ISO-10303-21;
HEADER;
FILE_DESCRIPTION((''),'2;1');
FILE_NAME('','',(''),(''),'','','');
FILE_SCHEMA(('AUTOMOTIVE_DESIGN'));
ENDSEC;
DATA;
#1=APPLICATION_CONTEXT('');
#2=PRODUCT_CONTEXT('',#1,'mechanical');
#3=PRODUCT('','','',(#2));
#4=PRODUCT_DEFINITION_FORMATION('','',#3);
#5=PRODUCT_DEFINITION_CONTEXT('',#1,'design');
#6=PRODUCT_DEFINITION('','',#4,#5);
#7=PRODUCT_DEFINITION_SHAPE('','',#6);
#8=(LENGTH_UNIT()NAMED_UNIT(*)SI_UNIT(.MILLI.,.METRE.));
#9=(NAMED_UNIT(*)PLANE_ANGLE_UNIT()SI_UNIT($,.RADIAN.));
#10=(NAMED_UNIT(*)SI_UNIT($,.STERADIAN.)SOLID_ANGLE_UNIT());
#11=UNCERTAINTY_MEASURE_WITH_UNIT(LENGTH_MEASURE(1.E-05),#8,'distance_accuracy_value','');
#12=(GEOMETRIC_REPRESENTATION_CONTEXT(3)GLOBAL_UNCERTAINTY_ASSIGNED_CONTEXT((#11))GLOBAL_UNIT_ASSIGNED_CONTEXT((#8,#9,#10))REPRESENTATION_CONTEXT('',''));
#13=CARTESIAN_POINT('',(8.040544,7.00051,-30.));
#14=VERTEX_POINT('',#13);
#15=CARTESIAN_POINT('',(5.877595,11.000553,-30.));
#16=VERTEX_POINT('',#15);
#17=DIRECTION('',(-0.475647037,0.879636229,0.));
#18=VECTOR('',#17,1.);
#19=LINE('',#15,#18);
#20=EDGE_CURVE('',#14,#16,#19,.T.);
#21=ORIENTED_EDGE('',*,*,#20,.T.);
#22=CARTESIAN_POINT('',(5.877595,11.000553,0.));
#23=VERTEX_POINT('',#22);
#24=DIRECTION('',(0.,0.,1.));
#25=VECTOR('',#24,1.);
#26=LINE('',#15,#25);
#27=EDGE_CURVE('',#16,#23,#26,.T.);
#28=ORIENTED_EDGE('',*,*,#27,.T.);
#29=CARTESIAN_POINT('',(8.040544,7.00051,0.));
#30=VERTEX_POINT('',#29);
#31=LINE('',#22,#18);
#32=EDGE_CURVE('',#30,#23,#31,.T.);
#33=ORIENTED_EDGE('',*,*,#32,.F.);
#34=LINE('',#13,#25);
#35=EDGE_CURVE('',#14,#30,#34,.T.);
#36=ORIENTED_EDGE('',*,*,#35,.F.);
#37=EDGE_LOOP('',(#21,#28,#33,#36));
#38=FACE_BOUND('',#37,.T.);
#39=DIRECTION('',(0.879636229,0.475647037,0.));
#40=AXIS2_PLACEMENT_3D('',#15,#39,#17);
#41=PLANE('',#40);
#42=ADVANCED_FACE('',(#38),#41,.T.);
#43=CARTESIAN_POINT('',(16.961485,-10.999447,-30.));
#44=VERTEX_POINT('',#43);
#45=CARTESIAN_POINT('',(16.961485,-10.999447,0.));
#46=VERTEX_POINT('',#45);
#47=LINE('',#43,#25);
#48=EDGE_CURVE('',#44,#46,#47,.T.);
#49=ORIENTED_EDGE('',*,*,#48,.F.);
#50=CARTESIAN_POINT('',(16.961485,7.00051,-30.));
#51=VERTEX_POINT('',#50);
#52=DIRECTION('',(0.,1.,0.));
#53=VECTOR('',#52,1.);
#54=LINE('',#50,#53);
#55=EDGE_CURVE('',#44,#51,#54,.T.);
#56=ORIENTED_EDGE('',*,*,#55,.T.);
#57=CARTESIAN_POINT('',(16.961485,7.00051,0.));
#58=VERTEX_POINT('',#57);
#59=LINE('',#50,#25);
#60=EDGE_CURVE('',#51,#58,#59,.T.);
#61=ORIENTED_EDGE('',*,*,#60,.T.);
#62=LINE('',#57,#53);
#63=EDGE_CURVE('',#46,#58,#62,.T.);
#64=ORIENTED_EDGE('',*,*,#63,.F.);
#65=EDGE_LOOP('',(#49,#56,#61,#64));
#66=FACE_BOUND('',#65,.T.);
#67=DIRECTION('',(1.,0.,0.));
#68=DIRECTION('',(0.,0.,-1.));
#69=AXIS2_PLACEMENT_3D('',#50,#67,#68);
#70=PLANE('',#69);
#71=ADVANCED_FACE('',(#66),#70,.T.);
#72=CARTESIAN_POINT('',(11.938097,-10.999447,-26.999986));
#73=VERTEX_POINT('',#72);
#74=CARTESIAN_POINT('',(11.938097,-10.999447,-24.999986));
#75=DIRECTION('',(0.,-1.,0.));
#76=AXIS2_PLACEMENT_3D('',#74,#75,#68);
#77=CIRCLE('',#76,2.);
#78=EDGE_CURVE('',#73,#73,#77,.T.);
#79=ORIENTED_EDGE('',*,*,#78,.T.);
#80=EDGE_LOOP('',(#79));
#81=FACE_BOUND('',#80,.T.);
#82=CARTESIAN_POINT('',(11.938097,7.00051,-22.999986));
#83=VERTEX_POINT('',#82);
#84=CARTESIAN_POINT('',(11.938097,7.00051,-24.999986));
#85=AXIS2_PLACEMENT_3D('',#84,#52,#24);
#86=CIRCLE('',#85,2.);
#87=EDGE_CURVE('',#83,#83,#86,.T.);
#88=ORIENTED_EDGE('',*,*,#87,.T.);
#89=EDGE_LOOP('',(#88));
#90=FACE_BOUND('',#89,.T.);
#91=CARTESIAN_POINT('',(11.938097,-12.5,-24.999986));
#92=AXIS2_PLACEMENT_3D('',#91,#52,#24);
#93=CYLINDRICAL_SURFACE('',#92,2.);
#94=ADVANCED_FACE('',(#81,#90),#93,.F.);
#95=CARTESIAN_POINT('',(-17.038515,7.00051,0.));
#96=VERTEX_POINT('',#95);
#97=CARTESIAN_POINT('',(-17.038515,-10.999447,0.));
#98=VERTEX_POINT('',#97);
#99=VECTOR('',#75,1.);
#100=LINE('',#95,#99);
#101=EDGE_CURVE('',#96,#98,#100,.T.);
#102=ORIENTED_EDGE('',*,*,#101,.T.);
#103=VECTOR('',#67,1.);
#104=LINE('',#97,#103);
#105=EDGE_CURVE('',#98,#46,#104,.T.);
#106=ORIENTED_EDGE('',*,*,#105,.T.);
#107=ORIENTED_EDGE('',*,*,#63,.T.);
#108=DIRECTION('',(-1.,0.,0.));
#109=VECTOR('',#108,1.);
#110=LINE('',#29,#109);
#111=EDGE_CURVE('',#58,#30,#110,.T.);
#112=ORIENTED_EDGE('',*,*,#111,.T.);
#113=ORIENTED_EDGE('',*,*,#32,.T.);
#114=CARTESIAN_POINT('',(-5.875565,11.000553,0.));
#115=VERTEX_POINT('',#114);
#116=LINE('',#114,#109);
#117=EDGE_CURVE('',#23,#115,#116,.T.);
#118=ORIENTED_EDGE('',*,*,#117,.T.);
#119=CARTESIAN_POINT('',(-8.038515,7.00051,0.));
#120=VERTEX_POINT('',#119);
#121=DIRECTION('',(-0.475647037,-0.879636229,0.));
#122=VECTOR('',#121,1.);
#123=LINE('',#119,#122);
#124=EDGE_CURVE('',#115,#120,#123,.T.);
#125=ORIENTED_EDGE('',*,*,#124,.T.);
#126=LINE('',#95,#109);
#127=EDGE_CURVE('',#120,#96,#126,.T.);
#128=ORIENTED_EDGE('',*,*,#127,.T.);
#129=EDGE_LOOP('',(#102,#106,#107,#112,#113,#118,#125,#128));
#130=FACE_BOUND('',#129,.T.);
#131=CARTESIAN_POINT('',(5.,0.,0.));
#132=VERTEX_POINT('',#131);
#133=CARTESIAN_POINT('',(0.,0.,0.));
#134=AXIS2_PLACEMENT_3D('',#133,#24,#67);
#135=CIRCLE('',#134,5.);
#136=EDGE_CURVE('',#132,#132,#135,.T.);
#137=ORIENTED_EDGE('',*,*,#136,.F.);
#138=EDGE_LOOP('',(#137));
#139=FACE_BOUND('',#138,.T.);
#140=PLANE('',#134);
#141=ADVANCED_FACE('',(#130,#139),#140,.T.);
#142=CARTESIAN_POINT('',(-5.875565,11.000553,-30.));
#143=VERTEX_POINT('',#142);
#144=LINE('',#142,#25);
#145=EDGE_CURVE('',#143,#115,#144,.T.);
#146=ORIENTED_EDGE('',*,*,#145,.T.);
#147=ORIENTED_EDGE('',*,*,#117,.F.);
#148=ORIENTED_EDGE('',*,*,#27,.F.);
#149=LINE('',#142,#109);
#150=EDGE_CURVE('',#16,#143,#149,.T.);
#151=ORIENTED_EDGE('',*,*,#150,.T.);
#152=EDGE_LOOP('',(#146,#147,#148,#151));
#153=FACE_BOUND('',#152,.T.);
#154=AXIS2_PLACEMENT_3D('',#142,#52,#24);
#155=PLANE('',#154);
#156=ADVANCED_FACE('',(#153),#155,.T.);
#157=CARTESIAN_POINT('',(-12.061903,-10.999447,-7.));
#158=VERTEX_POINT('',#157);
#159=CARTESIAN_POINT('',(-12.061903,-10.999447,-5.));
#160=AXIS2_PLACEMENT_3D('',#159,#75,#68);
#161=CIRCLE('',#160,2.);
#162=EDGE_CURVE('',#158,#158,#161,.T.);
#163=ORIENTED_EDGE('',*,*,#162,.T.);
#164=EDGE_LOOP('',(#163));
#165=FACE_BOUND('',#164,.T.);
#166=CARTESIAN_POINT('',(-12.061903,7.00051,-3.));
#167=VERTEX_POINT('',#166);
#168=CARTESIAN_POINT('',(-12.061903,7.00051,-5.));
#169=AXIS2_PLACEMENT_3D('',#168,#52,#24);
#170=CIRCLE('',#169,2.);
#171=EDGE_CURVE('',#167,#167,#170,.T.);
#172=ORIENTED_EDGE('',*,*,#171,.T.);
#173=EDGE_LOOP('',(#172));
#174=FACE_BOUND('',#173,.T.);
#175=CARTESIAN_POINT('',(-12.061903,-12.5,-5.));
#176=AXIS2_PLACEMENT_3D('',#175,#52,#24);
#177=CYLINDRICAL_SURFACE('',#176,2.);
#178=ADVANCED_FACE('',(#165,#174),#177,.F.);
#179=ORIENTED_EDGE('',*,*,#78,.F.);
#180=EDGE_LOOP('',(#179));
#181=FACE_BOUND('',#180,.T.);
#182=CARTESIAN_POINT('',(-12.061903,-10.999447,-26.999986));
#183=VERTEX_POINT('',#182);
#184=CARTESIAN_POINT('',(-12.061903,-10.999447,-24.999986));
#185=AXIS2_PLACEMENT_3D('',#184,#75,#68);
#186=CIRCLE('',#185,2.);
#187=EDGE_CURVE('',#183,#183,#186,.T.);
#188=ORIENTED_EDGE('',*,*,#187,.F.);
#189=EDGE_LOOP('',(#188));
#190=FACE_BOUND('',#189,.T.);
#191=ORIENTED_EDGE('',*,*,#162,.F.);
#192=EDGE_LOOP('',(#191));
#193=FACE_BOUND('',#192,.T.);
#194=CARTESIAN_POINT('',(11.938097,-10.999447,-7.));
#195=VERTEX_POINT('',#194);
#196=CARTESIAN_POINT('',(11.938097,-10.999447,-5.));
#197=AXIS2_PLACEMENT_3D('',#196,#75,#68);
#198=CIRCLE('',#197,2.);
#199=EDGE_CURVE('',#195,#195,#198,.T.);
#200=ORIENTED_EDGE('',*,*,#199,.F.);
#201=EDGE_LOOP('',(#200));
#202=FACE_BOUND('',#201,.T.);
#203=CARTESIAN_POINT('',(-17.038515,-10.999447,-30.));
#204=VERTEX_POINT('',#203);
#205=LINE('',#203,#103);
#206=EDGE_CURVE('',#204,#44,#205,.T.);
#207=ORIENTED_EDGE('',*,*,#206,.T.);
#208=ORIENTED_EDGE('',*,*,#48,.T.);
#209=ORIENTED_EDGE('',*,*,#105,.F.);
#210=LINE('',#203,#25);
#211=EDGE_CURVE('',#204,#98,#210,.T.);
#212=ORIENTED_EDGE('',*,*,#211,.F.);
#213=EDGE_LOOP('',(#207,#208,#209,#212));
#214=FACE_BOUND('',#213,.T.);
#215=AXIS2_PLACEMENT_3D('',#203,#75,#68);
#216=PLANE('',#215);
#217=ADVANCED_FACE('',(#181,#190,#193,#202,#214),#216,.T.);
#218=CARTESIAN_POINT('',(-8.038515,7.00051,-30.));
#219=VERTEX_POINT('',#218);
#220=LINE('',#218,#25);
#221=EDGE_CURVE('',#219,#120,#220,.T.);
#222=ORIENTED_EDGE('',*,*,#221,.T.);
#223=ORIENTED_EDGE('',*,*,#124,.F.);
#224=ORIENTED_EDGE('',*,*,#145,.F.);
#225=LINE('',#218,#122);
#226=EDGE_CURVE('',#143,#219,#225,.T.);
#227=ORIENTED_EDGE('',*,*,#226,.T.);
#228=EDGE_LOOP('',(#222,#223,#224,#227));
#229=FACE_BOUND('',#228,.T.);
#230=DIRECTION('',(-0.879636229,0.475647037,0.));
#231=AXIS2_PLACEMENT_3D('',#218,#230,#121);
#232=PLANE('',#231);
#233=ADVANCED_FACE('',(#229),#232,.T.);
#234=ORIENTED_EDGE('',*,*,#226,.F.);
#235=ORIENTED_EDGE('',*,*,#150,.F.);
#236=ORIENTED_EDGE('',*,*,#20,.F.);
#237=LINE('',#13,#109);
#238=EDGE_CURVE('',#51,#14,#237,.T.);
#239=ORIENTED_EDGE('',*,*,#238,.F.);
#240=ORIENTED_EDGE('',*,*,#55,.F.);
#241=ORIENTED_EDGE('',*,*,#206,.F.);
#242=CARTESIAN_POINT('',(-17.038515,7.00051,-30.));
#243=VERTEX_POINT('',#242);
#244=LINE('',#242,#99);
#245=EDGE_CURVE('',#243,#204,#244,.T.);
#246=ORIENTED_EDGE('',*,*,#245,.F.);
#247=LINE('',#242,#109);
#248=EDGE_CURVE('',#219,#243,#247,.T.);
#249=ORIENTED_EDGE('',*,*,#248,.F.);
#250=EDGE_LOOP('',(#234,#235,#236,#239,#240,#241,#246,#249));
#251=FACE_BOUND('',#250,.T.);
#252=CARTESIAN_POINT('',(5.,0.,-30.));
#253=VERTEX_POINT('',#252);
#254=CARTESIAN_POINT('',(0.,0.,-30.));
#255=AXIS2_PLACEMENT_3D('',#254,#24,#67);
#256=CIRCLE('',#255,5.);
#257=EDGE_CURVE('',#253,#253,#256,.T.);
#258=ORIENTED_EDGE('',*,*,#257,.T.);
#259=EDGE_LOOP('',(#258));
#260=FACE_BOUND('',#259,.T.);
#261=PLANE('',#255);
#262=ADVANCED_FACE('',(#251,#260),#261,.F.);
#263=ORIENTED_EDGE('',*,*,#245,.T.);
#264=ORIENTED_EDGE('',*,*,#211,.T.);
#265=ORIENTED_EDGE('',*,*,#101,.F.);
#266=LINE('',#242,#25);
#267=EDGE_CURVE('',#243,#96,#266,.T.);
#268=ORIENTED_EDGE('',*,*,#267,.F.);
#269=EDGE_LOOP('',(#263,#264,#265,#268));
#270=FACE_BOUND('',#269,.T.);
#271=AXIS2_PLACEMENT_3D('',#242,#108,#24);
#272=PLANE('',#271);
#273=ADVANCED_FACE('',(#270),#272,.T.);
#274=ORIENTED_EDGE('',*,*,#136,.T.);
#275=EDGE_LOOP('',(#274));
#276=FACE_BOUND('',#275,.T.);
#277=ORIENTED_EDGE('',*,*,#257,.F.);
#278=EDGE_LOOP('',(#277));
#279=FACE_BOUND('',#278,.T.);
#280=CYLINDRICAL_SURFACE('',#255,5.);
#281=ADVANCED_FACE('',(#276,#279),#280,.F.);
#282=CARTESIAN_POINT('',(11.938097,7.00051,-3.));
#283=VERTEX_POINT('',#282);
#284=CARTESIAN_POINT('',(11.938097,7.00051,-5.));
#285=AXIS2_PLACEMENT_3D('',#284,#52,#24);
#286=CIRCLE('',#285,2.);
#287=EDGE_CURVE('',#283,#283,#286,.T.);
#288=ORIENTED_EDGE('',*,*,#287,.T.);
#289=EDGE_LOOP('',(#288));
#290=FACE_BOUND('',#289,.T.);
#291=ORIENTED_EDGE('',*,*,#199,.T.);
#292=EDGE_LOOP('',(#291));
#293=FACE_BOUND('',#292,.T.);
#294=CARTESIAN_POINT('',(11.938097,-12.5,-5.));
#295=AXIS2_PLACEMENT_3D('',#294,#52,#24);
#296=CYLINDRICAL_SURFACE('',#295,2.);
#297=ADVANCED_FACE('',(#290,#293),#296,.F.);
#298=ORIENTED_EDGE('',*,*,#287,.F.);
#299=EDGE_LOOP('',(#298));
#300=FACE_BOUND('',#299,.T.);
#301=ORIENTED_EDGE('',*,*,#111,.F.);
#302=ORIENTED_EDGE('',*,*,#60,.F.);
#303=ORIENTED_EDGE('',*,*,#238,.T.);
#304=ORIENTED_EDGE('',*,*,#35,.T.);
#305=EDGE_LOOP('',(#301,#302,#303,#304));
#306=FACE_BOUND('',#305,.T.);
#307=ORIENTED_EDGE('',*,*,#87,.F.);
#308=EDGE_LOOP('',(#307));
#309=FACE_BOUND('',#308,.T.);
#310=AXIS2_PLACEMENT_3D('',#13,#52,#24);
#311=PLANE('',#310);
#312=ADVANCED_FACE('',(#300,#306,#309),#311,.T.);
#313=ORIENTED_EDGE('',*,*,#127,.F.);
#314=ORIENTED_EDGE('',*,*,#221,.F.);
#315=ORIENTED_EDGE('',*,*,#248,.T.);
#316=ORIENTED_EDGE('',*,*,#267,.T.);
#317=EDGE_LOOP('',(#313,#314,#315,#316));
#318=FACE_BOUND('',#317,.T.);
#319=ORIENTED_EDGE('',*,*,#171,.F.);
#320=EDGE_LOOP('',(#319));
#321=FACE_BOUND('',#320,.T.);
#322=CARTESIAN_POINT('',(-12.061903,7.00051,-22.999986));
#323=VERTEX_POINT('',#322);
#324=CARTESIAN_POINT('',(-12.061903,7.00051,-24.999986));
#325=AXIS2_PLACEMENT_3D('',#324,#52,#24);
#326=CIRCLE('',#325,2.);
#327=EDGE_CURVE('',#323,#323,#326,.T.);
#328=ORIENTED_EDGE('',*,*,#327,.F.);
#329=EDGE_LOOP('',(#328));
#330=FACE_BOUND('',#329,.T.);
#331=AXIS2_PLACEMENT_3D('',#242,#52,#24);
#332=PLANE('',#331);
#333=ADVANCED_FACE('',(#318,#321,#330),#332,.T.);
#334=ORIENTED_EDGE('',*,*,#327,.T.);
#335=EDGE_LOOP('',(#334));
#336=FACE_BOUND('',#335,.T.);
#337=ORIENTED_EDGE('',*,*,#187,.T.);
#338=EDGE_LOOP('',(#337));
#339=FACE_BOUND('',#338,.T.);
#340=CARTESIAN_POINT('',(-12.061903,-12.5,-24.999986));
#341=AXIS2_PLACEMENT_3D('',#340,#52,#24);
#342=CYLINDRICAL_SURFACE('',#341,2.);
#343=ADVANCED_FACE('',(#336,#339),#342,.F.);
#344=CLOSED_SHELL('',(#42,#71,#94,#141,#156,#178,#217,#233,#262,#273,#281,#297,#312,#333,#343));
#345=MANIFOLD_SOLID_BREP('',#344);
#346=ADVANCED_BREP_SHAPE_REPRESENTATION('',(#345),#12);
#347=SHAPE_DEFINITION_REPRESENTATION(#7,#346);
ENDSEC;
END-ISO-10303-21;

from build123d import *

# Parameters (mm, degrees)
BOSS_EXTRUDE2_DEPTH    = 30
HOLE_R                 = 5
CUT_EXTRUDE1_DEPTH     = 30
CUT_EXTRUDE2_START     = -10.999447078
CUT_EXTRUDE2_OUTLINE_R = 2
CUT_EXTRUDE2_DEPTH     = 17.999956595


# Read off the part's stored shape, not the designer's step: Cut-Extrude2
with BuildPart() as part:
    # body → Boss-Extrude2 (new body)
    with BuildSketch(Plane.XY):
        Polygon((-8.038514806, 7.000509517), (-5.875565247, 11.000552922), (5.877594601, 11.000552922), (8.04054416, 7.000509517), (16.961485195, 7.000509517), (16.961485195, -10.999447078), (-17.038514805, -10.999447078), (-17.038514805, 7.000509517), align=None)
    extrude(amount=-BOSS_EXTRUDE2_DEPTH)

    # hole → Cut-Extrude1 (cut)
    with BuildSketch(Plane.XY):
        Circle(HOLE_R)
    extrude(amount=-CUT_EXTRUDE1_DEPTH, mode=Mode.SUBTRACT)

    # Cut-Extrude2 outline → Cut-Extrude2 (cut)
    with BuildSketch(Plane(origin=(0, 0, 0), x_dir=(1, 0, 0), z_dir=(0, 1, 0)).offset(CUT_EXTRUDE2_START)):
        with Locations((-12.061902792, 5)):
            Circle(CUT_EXTRUDE2_OUTLINE_R)
        with Locations((-12.061902792, 24.999986325)):
            Circle(CUT_EXTRUDE2_OUTLINE_R)
        with Locations((11.938097208, 24.999986325)):
            Circle(CUT_EXTRUDE2_OUTLINE_R)
        with Locations((11.938097208, 5)):
            Circle(CUT_EXTRUDE2_OUTLINE_R)
    extrude(amount=CUT_EXTRUDE2_DEPTH, mode=Mode.SUBTRACT)


solid = part.part
